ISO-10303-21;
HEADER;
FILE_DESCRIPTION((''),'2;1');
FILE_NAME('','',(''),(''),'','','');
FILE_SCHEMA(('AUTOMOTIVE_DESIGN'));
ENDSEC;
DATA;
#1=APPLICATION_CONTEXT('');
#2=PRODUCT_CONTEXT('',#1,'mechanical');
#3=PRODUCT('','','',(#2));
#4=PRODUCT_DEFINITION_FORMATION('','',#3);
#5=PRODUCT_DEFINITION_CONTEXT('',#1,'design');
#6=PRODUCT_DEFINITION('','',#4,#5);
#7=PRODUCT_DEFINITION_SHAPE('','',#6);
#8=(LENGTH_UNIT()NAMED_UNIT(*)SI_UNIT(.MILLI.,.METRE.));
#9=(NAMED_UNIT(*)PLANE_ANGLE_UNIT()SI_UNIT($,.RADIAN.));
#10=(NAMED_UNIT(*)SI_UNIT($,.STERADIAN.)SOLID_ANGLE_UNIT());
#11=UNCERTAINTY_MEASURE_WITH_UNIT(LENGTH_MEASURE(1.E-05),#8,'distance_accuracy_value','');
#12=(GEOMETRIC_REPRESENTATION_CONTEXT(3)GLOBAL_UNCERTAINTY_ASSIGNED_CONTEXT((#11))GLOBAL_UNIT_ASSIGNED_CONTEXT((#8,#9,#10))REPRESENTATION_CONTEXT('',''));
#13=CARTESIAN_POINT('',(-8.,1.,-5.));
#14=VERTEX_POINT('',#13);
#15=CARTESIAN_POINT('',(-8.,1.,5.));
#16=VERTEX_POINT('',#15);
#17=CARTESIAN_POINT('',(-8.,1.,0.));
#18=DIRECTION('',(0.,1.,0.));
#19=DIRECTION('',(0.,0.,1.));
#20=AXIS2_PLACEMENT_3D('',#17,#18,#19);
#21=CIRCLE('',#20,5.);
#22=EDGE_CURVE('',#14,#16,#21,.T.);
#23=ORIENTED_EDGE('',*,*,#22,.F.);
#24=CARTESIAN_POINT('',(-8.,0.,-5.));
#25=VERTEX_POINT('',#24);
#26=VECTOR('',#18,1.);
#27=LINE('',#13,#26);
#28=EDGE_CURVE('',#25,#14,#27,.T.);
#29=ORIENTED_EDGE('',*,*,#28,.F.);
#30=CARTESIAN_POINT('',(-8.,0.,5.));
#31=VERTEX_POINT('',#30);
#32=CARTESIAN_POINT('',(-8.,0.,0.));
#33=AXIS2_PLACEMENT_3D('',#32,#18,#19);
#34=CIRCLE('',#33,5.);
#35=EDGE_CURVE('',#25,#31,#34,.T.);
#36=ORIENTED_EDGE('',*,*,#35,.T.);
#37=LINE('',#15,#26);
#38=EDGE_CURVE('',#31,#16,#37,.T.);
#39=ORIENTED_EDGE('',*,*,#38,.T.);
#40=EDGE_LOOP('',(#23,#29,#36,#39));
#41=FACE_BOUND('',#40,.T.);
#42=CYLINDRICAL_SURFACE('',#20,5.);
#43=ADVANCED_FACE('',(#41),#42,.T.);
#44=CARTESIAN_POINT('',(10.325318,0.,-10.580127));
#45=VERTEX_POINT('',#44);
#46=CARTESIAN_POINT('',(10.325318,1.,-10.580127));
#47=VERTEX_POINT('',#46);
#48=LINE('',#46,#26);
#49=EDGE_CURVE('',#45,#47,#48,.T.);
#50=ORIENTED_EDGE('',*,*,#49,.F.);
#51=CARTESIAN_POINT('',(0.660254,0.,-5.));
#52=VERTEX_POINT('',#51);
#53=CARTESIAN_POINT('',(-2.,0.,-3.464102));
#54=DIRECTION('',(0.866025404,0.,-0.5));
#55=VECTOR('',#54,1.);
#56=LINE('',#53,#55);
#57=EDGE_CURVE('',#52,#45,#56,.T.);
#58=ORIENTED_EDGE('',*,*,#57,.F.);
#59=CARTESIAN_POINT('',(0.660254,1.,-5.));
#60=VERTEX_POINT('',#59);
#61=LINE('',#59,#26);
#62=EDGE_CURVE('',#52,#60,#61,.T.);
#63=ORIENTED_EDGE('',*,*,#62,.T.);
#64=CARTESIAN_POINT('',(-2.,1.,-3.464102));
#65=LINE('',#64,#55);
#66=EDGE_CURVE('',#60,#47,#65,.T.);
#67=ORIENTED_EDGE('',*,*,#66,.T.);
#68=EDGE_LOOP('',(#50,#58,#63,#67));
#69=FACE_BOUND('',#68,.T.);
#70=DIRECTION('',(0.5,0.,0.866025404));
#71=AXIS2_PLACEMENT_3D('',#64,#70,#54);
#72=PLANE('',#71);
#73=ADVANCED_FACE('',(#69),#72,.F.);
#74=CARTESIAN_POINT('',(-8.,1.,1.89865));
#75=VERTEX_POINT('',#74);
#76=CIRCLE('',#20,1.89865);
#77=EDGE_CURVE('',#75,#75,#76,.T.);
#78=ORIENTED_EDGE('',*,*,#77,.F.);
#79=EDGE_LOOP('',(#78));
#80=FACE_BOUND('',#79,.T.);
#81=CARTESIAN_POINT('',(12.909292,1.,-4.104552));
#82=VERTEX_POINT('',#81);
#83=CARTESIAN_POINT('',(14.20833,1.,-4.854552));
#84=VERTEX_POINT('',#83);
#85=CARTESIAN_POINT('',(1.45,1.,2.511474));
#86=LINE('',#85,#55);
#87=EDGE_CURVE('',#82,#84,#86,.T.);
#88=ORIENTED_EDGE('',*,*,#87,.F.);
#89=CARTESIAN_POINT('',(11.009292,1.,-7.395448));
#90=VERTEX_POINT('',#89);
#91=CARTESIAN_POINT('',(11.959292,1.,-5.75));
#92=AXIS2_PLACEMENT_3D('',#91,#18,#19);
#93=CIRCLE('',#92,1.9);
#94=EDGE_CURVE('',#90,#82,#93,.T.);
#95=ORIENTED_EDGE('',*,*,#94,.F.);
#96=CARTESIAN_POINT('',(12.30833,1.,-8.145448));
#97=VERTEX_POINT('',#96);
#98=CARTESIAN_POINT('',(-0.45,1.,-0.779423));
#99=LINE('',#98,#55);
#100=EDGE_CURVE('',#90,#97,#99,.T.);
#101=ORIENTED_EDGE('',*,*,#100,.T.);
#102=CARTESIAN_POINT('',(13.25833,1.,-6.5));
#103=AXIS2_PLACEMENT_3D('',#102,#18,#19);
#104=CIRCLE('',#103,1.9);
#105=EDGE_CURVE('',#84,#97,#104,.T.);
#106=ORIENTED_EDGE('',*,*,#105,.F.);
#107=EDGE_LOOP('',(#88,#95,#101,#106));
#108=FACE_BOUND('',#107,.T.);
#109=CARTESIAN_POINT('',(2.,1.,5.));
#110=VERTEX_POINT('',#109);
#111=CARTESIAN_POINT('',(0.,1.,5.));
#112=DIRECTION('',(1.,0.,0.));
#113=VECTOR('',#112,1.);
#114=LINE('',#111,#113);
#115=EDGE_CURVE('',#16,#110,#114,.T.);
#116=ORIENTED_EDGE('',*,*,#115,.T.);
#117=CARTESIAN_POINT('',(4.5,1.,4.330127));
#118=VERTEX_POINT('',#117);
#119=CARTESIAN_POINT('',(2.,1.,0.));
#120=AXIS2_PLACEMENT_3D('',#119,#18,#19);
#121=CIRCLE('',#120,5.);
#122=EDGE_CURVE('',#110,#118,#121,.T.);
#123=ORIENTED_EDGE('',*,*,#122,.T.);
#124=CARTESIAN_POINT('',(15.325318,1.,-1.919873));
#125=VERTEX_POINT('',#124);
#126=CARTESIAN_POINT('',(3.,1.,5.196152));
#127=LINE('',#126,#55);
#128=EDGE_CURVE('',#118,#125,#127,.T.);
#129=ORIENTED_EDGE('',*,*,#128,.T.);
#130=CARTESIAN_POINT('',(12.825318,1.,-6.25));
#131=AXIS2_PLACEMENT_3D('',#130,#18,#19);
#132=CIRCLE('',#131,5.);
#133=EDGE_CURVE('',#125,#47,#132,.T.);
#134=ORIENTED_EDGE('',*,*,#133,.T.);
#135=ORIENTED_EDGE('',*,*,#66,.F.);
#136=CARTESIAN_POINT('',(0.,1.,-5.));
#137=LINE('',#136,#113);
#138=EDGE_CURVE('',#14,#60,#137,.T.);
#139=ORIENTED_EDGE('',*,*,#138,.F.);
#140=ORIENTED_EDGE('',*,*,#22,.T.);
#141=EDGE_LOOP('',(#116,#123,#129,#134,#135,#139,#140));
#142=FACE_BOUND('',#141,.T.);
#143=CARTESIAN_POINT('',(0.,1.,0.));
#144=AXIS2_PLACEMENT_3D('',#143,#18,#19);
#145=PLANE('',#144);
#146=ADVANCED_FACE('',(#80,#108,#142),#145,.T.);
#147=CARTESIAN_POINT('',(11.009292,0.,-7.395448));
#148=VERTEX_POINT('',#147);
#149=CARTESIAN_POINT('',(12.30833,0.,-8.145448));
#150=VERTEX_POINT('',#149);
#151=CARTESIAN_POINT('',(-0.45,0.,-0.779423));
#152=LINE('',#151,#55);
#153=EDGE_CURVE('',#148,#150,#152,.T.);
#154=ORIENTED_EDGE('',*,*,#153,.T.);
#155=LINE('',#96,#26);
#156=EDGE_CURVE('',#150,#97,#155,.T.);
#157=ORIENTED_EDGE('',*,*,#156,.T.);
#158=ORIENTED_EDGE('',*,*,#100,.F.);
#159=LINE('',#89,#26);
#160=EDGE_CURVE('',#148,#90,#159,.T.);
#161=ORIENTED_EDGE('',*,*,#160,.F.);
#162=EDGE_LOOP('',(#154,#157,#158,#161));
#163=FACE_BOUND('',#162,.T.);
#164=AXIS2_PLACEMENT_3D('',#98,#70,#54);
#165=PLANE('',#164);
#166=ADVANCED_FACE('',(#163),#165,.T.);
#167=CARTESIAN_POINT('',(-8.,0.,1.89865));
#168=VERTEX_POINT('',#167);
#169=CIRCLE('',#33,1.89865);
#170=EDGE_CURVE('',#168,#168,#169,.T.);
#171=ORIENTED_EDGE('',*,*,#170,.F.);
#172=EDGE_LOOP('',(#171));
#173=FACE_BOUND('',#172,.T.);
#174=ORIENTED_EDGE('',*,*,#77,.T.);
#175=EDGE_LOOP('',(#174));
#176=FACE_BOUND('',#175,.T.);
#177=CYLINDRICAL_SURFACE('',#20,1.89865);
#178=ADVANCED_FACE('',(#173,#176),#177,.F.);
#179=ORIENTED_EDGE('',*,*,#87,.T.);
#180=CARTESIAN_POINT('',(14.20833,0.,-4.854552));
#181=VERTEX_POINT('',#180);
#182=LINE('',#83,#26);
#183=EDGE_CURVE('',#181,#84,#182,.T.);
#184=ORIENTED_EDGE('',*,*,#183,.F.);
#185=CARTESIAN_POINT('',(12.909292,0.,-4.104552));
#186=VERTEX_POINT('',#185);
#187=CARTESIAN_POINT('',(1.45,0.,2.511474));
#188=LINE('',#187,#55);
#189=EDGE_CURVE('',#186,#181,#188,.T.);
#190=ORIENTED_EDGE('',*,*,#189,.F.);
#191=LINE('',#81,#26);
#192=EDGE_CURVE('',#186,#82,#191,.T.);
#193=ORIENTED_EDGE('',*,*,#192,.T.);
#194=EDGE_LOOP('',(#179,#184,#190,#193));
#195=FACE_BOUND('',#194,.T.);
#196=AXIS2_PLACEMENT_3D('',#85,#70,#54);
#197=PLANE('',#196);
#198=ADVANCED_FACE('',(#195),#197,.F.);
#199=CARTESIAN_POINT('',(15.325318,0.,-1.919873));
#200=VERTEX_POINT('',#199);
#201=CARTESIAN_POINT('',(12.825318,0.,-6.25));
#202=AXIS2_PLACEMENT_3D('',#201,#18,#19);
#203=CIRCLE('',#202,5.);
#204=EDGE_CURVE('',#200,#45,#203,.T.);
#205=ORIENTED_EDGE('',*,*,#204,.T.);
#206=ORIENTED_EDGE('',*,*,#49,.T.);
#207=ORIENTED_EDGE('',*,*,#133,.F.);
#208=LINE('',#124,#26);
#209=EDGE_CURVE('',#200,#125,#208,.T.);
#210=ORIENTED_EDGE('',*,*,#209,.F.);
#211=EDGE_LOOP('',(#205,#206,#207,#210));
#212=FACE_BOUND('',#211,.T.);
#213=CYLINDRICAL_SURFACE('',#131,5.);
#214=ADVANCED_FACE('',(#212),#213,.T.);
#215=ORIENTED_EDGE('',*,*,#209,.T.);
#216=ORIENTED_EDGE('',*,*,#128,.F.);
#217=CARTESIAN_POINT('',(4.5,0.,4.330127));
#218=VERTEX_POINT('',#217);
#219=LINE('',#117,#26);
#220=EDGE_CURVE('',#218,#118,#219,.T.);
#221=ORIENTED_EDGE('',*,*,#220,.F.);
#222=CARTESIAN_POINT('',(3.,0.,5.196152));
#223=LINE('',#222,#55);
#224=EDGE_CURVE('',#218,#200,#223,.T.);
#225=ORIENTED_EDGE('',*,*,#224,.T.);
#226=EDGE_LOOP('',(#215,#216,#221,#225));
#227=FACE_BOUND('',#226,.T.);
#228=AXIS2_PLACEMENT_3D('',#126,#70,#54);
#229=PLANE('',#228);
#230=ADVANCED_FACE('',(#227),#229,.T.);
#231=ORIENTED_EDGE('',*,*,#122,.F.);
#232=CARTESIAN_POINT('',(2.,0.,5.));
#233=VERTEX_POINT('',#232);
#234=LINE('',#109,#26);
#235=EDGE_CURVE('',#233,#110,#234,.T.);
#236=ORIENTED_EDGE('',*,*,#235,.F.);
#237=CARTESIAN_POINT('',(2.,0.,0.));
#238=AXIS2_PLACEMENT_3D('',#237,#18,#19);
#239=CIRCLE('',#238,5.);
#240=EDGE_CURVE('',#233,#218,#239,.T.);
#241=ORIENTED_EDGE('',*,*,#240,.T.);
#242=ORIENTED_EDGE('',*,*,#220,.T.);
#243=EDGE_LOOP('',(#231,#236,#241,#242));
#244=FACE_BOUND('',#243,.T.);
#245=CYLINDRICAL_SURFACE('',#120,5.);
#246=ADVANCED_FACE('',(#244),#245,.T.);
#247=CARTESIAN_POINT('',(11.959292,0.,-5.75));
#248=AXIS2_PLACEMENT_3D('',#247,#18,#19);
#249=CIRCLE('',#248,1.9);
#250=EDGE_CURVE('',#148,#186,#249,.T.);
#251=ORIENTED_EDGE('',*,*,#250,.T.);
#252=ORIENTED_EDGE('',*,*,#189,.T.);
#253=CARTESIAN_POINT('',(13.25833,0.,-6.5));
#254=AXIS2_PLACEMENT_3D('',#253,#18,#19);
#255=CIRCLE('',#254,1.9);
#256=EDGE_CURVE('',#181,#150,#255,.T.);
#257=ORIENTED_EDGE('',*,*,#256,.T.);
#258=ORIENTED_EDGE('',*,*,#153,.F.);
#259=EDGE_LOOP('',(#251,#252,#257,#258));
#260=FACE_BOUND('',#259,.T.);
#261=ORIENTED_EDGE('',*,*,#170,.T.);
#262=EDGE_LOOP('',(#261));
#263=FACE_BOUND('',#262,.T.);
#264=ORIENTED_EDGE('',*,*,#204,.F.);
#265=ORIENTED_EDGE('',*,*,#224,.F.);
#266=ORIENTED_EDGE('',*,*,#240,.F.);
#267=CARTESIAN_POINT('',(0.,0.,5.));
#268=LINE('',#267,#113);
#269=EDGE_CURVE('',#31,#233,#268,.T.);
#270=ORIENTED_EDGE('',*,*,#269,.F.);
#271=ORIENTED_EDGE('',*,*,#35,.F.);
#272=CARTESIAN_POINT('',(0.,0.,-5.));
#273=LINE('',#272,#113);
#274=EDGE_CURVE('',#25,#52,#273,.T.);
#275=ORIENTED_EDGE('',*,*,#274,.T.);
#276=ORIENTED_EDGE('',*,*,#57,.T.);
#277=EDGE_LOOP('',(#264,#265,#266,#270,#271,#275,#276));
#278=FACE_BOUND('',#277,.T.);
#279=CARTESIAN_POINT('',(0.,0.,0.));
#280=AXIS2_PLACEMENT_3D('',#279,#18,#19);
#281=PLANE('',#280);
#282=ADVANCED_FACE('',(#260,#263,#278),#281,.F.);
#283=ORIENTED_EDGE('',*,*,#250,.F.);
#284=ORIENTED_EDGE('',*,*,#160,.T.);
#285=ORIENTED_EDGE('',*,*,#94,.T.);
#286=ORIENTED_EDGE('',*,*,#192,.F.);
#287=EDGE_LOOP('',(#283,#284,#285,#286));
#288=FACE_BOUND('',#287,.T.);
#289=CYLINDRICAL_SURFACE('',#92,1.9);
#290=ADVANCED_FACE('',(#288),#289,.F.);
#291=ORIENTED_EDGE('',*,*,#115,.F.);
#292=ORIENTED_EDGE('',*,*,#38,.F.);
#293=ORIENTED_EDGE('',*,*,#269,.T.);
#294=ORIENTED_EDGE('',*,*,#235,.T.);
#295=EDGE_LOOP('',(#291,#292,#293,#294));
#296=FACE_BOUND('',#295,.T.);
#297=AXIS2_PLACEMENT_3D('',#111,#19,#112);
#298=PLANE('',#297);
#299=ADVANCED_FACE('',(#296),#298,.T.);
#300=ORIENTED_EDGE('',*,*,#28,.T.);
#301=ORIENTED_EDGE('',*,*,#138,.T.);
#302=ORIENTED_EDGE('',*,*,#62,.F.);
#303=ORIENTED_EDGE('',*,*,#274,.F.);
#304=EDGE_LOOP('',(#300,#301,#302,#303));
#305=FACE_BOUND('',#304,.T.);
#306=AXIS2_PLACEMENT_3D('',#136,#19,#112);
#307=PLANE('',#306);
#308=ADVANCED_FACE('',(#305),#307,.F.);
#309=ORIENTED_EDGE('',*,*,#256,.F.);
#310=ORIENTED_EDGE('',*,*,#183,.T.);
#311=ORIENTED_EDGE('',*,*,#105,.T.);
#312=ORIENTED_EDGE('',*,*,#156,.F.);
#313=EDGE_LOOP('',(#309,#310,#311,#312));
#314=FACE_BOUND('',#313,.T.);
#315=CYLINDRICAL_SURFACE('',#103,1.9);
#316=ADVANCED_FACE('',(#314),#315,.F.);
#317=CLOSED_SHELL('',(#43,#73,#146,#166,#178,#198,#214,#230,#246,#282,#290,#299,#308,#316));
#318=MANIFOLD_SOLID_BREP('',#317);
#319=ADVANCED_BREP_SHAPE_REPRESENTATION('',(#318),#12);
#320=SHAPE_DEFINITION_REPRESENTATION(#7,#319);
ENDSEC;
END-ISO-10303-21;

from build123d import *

# Parameters (mm, degrees)
BOSS_EXTRUDE1_DEPTH   = 1
F_6_CLEARANCE_HOLE1_D = 3.7973


with BuildPart() as part:
    # Sketch1 → Boss-Extrude1 (new body)
    # profile 1 of 3: a face of its own
    with BuildSketch(Plane(origin=(0, 0, 0), x_dir=(1, 0, 0), z_dir=(0, 1, 0))):
        with BuildLine():
            Line((0.660254038, 5), (-8, 5))
            ThreePointArc((-8, 5), (-13, 0), (-8, -5))
            Line((-8, -5), (2, -5))
            ThreePointArc((2, -5), (-2.829629131, -1.294095226), (-0.5, 4.330127019))
            Line((-0.5, 4.330127019), (0.660254038, 5))
        make_face()
    # profile 2 of 3: a face of its own
    with BuildSketch(Plane(origin=(0, 0, 0), x_dir=(1, 0, 0), z_dir=(0, 1, 0))):
        with BuildLine():
            Line((2, 5), (0.660254038, 5))
            Line((0.660254038, 5), (-0.5, 4.330127019))
            ThreePointArc((-0.5, 4.330127019), (-2.829629131, -1.294095226), (2, -5))
            ThreePointArc((2, -5), (3.294095226, -4.829629131), (4.5, -4.330127019))
            ThreePointArc((4.5, -4.330127019), (6.829629131, 1.294095226), (2, 5))
        make_face()
    # profile 3 of 3: a face of its own
    with BuildSketch(Plane(origin=(0, 0, 0), x_dir=(1, 0, 0), z_dir=(0, 1, 0))):
        with BuildLine():
            Line((10.325317547, 10.580127019), (0.660254038, 5))
            Line((0.660254038, 5), (2, 5))
            ThreePointArc((2, 5), (6.829629131, 1.294095226), (4.5, -4.330127019))
            Line((4.5, -4.330127019), (15.325317547, 1.919872981))
            ThreePointArc((15.325317547, 1.919872981), (17.155444566, 8.75), (10.325317547, 10.580127019))
        make_face()
        with BuildLine():
            ThreePointArc((12.909292144, 4.104551733), (10.313843876, 4.8), (11.009292144, 7.395448267))
            Line((11.009292144, 7.395448267), (12.308330249, 8.145448267))
            ThreePointArc((12.308330249, 8.145448267), (14.903778516, 7.45), (14.208330249, 4.854551733))
            Line((14.208330249, 4.854551733), (12.909292144, 4.104551733))
        make_face(mode=Mode.SUBTRACT)
    extrude(amount=BOSS_EXTRUDE1_DEPTH)

    # #6 Clearance Hole1 (through all)
    with Locations(Plane(origin=(0, 1, 0), x_dir=(1, 0, 0), z_dir=(0, 1, 0))):
        with Locations((-8, 0)):
            Hole(F_6_CLEARANCE_HOLE1_D / 2)


solid = part.part
